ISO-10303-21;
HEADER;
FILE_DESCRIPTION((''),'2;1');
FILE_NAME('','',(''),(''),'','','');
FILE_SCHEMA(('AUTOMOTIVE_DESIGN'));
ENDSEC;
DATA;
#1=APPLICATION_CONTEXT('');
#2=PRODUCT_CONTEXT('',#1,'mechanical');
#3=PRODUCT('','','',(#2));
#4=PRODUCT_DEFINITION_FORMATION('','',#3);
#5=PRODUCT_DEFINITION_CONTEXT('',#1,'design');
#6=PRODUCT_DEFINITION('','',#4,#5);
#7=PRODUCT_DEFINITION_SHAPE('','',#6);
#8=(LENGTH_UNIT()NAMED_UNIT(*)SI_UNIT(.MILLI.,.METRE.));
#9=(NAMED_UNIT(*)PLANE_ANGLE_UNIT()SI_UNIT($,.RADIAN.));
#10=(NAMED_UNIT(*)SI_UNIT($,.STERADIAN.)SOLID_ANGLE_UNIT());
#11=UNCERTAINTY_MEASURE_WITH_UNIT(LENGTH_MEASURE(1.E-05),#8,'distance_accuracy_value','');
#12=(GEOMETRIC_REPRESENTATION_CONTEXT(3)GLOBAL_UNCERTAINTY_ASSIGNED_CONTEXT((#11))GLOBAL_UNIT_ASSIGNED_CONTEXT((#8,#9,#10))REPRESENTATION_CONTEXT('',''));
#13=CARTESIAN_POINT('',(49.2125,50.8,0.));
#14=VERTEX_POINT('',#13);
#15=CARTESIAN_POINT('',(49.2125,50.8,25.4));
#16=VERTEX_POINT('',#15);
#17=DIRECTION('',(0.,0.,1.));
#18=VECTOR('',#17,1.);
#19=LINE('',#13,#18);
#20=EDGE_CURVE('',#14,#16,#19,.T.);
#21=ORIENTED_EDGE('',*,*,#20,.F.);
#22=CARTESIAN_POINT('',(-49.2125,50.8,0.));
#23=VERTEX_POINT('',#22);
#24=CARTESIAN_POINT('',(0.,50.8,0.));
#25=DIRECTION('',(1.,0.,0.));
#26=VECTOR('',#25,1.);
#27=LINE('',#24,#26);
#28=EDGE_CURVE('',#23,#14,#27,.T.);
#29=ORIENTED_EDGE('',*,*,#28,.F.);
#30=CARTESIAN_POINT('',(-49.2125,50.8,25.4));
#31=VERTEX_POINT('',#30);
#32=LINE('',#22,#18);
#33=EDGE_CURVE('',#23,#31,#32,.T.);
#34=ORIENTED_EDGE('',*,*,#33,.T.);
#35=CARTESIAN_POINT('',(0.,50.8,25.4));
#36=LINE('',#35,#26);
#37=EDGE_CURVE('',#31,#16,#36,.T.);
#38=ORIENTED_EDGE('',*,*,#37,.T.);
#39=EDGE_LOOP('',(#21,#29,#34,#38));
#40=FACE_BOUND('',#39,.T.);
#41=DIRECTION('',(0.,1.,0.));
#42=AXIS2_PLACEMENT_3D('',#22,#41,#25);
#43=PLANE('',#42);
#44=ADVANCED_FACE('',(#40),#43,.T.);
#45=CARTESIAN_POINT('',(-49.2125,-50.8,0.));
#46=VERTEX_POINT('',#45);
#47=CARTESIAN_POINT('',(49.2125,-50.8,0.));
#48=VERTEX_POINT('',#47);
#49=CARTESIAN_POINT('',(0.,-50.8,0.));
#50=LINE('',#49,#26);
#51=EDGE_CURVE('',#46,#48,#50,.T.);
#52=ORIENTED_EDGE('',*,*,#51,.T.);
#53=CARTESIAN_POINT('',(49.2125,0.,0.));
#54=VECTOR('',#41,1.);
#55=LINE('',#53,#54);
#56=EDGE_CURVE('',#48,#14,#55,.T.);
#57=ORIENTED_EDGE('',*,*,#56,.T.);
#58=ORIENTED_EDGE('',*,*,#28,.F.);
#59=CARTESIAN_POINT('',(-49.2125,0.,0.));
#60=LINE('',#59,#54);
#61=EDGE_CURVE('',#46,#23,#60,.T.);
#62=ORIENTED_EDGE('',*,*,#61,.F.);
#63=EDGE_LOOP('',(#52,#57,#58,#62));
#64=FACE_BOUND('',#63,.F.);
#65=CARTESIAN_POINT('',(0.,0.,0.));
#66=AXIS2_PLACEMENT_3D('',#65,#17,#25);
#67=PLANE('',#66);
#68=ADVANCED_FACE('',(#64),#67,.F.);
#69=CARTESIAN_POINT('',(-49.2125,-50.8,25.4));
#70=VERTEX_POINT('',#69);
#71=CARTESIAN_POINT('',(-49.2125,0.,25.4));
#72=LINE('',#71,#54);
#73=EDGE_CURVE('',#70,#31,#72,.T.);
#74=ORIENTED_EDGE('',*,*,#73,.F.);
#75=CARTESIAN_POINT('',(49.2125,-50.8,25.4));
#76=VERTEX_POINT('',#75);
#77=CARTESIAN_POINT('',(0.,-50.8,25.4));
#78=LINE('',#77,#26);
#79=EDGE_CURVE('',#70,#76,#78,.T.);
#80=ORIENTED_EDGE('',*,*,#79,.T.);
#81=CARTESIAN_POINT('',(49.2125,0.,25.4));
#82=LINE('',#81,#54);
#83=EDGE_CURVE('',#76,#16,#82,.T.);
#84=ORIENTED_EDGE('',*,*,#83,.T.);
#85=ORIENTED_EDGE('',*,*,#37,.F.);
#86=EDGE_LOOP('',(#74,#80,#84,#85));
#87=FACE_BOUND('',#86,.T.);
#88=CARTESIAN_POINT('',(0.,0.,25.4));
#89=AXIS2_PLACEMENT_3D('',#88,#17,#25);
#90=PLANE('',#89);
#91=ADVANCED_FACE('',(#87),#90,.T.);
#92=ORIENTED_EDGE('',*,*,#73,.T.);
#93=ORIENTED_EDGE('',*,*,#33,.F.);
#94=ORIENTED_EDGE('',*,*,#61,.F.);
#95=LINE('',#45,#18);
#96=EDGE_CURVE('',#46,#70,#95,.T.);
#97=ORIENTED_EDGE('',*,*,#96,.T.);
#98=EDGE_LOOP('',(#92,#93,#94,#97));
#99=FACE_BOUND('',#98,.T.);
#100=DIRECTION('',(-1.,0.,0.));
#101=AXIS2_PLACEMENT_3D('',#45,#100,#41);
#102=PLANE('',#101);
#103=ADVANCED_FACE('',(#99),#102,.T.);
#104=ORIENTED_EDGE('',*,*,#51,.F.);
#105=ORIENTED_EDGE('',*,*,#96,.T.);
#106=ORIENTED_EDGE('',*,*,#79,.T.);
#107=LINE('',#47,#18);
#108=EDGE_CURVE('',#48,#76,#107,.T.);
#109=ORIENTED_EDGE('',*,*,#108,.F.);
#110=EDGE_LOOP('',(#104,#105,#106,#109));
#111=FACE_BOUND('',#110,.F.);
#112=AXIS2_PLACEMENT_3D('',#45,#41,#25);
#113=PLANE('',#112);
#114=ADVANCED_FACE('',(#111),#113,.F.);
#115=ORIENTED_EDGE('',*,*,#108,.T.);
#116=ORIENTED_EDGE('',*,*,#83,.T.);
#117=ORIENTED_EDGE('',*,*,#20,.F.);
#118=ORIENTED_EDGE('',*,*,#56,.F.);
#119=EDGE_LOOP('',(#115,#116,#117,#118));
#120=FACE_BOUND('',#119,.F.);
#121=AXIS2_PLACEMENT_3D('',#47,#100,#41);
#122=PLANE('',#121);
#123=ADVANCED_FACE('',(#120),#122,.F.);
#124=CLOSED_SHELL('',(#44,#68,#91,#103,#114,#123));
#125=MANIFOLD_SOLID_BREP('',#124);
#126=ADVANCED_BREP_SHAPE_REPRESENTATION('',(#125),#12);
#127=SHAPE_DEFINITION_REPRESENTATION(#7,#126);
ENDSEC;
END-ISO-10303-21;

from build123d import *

# Parameters (mm, degrees)
F1_W     = 98.425
F1_H     = 101.6
F2_DEPTH = 25.4


# Not quite as in the source:
# - a variable given as a bare number and used for a length is read in inches; the dataset says mm whatever the document's units were


with BuildPart() as f2:
    # F1 (on Top) → F2 (new body)
    with BuildSketch(Plane.XY):
        Rectangle(F1_W, F1_H)
    extrude(amount=F2_DEPTH)


solid = f2.part
